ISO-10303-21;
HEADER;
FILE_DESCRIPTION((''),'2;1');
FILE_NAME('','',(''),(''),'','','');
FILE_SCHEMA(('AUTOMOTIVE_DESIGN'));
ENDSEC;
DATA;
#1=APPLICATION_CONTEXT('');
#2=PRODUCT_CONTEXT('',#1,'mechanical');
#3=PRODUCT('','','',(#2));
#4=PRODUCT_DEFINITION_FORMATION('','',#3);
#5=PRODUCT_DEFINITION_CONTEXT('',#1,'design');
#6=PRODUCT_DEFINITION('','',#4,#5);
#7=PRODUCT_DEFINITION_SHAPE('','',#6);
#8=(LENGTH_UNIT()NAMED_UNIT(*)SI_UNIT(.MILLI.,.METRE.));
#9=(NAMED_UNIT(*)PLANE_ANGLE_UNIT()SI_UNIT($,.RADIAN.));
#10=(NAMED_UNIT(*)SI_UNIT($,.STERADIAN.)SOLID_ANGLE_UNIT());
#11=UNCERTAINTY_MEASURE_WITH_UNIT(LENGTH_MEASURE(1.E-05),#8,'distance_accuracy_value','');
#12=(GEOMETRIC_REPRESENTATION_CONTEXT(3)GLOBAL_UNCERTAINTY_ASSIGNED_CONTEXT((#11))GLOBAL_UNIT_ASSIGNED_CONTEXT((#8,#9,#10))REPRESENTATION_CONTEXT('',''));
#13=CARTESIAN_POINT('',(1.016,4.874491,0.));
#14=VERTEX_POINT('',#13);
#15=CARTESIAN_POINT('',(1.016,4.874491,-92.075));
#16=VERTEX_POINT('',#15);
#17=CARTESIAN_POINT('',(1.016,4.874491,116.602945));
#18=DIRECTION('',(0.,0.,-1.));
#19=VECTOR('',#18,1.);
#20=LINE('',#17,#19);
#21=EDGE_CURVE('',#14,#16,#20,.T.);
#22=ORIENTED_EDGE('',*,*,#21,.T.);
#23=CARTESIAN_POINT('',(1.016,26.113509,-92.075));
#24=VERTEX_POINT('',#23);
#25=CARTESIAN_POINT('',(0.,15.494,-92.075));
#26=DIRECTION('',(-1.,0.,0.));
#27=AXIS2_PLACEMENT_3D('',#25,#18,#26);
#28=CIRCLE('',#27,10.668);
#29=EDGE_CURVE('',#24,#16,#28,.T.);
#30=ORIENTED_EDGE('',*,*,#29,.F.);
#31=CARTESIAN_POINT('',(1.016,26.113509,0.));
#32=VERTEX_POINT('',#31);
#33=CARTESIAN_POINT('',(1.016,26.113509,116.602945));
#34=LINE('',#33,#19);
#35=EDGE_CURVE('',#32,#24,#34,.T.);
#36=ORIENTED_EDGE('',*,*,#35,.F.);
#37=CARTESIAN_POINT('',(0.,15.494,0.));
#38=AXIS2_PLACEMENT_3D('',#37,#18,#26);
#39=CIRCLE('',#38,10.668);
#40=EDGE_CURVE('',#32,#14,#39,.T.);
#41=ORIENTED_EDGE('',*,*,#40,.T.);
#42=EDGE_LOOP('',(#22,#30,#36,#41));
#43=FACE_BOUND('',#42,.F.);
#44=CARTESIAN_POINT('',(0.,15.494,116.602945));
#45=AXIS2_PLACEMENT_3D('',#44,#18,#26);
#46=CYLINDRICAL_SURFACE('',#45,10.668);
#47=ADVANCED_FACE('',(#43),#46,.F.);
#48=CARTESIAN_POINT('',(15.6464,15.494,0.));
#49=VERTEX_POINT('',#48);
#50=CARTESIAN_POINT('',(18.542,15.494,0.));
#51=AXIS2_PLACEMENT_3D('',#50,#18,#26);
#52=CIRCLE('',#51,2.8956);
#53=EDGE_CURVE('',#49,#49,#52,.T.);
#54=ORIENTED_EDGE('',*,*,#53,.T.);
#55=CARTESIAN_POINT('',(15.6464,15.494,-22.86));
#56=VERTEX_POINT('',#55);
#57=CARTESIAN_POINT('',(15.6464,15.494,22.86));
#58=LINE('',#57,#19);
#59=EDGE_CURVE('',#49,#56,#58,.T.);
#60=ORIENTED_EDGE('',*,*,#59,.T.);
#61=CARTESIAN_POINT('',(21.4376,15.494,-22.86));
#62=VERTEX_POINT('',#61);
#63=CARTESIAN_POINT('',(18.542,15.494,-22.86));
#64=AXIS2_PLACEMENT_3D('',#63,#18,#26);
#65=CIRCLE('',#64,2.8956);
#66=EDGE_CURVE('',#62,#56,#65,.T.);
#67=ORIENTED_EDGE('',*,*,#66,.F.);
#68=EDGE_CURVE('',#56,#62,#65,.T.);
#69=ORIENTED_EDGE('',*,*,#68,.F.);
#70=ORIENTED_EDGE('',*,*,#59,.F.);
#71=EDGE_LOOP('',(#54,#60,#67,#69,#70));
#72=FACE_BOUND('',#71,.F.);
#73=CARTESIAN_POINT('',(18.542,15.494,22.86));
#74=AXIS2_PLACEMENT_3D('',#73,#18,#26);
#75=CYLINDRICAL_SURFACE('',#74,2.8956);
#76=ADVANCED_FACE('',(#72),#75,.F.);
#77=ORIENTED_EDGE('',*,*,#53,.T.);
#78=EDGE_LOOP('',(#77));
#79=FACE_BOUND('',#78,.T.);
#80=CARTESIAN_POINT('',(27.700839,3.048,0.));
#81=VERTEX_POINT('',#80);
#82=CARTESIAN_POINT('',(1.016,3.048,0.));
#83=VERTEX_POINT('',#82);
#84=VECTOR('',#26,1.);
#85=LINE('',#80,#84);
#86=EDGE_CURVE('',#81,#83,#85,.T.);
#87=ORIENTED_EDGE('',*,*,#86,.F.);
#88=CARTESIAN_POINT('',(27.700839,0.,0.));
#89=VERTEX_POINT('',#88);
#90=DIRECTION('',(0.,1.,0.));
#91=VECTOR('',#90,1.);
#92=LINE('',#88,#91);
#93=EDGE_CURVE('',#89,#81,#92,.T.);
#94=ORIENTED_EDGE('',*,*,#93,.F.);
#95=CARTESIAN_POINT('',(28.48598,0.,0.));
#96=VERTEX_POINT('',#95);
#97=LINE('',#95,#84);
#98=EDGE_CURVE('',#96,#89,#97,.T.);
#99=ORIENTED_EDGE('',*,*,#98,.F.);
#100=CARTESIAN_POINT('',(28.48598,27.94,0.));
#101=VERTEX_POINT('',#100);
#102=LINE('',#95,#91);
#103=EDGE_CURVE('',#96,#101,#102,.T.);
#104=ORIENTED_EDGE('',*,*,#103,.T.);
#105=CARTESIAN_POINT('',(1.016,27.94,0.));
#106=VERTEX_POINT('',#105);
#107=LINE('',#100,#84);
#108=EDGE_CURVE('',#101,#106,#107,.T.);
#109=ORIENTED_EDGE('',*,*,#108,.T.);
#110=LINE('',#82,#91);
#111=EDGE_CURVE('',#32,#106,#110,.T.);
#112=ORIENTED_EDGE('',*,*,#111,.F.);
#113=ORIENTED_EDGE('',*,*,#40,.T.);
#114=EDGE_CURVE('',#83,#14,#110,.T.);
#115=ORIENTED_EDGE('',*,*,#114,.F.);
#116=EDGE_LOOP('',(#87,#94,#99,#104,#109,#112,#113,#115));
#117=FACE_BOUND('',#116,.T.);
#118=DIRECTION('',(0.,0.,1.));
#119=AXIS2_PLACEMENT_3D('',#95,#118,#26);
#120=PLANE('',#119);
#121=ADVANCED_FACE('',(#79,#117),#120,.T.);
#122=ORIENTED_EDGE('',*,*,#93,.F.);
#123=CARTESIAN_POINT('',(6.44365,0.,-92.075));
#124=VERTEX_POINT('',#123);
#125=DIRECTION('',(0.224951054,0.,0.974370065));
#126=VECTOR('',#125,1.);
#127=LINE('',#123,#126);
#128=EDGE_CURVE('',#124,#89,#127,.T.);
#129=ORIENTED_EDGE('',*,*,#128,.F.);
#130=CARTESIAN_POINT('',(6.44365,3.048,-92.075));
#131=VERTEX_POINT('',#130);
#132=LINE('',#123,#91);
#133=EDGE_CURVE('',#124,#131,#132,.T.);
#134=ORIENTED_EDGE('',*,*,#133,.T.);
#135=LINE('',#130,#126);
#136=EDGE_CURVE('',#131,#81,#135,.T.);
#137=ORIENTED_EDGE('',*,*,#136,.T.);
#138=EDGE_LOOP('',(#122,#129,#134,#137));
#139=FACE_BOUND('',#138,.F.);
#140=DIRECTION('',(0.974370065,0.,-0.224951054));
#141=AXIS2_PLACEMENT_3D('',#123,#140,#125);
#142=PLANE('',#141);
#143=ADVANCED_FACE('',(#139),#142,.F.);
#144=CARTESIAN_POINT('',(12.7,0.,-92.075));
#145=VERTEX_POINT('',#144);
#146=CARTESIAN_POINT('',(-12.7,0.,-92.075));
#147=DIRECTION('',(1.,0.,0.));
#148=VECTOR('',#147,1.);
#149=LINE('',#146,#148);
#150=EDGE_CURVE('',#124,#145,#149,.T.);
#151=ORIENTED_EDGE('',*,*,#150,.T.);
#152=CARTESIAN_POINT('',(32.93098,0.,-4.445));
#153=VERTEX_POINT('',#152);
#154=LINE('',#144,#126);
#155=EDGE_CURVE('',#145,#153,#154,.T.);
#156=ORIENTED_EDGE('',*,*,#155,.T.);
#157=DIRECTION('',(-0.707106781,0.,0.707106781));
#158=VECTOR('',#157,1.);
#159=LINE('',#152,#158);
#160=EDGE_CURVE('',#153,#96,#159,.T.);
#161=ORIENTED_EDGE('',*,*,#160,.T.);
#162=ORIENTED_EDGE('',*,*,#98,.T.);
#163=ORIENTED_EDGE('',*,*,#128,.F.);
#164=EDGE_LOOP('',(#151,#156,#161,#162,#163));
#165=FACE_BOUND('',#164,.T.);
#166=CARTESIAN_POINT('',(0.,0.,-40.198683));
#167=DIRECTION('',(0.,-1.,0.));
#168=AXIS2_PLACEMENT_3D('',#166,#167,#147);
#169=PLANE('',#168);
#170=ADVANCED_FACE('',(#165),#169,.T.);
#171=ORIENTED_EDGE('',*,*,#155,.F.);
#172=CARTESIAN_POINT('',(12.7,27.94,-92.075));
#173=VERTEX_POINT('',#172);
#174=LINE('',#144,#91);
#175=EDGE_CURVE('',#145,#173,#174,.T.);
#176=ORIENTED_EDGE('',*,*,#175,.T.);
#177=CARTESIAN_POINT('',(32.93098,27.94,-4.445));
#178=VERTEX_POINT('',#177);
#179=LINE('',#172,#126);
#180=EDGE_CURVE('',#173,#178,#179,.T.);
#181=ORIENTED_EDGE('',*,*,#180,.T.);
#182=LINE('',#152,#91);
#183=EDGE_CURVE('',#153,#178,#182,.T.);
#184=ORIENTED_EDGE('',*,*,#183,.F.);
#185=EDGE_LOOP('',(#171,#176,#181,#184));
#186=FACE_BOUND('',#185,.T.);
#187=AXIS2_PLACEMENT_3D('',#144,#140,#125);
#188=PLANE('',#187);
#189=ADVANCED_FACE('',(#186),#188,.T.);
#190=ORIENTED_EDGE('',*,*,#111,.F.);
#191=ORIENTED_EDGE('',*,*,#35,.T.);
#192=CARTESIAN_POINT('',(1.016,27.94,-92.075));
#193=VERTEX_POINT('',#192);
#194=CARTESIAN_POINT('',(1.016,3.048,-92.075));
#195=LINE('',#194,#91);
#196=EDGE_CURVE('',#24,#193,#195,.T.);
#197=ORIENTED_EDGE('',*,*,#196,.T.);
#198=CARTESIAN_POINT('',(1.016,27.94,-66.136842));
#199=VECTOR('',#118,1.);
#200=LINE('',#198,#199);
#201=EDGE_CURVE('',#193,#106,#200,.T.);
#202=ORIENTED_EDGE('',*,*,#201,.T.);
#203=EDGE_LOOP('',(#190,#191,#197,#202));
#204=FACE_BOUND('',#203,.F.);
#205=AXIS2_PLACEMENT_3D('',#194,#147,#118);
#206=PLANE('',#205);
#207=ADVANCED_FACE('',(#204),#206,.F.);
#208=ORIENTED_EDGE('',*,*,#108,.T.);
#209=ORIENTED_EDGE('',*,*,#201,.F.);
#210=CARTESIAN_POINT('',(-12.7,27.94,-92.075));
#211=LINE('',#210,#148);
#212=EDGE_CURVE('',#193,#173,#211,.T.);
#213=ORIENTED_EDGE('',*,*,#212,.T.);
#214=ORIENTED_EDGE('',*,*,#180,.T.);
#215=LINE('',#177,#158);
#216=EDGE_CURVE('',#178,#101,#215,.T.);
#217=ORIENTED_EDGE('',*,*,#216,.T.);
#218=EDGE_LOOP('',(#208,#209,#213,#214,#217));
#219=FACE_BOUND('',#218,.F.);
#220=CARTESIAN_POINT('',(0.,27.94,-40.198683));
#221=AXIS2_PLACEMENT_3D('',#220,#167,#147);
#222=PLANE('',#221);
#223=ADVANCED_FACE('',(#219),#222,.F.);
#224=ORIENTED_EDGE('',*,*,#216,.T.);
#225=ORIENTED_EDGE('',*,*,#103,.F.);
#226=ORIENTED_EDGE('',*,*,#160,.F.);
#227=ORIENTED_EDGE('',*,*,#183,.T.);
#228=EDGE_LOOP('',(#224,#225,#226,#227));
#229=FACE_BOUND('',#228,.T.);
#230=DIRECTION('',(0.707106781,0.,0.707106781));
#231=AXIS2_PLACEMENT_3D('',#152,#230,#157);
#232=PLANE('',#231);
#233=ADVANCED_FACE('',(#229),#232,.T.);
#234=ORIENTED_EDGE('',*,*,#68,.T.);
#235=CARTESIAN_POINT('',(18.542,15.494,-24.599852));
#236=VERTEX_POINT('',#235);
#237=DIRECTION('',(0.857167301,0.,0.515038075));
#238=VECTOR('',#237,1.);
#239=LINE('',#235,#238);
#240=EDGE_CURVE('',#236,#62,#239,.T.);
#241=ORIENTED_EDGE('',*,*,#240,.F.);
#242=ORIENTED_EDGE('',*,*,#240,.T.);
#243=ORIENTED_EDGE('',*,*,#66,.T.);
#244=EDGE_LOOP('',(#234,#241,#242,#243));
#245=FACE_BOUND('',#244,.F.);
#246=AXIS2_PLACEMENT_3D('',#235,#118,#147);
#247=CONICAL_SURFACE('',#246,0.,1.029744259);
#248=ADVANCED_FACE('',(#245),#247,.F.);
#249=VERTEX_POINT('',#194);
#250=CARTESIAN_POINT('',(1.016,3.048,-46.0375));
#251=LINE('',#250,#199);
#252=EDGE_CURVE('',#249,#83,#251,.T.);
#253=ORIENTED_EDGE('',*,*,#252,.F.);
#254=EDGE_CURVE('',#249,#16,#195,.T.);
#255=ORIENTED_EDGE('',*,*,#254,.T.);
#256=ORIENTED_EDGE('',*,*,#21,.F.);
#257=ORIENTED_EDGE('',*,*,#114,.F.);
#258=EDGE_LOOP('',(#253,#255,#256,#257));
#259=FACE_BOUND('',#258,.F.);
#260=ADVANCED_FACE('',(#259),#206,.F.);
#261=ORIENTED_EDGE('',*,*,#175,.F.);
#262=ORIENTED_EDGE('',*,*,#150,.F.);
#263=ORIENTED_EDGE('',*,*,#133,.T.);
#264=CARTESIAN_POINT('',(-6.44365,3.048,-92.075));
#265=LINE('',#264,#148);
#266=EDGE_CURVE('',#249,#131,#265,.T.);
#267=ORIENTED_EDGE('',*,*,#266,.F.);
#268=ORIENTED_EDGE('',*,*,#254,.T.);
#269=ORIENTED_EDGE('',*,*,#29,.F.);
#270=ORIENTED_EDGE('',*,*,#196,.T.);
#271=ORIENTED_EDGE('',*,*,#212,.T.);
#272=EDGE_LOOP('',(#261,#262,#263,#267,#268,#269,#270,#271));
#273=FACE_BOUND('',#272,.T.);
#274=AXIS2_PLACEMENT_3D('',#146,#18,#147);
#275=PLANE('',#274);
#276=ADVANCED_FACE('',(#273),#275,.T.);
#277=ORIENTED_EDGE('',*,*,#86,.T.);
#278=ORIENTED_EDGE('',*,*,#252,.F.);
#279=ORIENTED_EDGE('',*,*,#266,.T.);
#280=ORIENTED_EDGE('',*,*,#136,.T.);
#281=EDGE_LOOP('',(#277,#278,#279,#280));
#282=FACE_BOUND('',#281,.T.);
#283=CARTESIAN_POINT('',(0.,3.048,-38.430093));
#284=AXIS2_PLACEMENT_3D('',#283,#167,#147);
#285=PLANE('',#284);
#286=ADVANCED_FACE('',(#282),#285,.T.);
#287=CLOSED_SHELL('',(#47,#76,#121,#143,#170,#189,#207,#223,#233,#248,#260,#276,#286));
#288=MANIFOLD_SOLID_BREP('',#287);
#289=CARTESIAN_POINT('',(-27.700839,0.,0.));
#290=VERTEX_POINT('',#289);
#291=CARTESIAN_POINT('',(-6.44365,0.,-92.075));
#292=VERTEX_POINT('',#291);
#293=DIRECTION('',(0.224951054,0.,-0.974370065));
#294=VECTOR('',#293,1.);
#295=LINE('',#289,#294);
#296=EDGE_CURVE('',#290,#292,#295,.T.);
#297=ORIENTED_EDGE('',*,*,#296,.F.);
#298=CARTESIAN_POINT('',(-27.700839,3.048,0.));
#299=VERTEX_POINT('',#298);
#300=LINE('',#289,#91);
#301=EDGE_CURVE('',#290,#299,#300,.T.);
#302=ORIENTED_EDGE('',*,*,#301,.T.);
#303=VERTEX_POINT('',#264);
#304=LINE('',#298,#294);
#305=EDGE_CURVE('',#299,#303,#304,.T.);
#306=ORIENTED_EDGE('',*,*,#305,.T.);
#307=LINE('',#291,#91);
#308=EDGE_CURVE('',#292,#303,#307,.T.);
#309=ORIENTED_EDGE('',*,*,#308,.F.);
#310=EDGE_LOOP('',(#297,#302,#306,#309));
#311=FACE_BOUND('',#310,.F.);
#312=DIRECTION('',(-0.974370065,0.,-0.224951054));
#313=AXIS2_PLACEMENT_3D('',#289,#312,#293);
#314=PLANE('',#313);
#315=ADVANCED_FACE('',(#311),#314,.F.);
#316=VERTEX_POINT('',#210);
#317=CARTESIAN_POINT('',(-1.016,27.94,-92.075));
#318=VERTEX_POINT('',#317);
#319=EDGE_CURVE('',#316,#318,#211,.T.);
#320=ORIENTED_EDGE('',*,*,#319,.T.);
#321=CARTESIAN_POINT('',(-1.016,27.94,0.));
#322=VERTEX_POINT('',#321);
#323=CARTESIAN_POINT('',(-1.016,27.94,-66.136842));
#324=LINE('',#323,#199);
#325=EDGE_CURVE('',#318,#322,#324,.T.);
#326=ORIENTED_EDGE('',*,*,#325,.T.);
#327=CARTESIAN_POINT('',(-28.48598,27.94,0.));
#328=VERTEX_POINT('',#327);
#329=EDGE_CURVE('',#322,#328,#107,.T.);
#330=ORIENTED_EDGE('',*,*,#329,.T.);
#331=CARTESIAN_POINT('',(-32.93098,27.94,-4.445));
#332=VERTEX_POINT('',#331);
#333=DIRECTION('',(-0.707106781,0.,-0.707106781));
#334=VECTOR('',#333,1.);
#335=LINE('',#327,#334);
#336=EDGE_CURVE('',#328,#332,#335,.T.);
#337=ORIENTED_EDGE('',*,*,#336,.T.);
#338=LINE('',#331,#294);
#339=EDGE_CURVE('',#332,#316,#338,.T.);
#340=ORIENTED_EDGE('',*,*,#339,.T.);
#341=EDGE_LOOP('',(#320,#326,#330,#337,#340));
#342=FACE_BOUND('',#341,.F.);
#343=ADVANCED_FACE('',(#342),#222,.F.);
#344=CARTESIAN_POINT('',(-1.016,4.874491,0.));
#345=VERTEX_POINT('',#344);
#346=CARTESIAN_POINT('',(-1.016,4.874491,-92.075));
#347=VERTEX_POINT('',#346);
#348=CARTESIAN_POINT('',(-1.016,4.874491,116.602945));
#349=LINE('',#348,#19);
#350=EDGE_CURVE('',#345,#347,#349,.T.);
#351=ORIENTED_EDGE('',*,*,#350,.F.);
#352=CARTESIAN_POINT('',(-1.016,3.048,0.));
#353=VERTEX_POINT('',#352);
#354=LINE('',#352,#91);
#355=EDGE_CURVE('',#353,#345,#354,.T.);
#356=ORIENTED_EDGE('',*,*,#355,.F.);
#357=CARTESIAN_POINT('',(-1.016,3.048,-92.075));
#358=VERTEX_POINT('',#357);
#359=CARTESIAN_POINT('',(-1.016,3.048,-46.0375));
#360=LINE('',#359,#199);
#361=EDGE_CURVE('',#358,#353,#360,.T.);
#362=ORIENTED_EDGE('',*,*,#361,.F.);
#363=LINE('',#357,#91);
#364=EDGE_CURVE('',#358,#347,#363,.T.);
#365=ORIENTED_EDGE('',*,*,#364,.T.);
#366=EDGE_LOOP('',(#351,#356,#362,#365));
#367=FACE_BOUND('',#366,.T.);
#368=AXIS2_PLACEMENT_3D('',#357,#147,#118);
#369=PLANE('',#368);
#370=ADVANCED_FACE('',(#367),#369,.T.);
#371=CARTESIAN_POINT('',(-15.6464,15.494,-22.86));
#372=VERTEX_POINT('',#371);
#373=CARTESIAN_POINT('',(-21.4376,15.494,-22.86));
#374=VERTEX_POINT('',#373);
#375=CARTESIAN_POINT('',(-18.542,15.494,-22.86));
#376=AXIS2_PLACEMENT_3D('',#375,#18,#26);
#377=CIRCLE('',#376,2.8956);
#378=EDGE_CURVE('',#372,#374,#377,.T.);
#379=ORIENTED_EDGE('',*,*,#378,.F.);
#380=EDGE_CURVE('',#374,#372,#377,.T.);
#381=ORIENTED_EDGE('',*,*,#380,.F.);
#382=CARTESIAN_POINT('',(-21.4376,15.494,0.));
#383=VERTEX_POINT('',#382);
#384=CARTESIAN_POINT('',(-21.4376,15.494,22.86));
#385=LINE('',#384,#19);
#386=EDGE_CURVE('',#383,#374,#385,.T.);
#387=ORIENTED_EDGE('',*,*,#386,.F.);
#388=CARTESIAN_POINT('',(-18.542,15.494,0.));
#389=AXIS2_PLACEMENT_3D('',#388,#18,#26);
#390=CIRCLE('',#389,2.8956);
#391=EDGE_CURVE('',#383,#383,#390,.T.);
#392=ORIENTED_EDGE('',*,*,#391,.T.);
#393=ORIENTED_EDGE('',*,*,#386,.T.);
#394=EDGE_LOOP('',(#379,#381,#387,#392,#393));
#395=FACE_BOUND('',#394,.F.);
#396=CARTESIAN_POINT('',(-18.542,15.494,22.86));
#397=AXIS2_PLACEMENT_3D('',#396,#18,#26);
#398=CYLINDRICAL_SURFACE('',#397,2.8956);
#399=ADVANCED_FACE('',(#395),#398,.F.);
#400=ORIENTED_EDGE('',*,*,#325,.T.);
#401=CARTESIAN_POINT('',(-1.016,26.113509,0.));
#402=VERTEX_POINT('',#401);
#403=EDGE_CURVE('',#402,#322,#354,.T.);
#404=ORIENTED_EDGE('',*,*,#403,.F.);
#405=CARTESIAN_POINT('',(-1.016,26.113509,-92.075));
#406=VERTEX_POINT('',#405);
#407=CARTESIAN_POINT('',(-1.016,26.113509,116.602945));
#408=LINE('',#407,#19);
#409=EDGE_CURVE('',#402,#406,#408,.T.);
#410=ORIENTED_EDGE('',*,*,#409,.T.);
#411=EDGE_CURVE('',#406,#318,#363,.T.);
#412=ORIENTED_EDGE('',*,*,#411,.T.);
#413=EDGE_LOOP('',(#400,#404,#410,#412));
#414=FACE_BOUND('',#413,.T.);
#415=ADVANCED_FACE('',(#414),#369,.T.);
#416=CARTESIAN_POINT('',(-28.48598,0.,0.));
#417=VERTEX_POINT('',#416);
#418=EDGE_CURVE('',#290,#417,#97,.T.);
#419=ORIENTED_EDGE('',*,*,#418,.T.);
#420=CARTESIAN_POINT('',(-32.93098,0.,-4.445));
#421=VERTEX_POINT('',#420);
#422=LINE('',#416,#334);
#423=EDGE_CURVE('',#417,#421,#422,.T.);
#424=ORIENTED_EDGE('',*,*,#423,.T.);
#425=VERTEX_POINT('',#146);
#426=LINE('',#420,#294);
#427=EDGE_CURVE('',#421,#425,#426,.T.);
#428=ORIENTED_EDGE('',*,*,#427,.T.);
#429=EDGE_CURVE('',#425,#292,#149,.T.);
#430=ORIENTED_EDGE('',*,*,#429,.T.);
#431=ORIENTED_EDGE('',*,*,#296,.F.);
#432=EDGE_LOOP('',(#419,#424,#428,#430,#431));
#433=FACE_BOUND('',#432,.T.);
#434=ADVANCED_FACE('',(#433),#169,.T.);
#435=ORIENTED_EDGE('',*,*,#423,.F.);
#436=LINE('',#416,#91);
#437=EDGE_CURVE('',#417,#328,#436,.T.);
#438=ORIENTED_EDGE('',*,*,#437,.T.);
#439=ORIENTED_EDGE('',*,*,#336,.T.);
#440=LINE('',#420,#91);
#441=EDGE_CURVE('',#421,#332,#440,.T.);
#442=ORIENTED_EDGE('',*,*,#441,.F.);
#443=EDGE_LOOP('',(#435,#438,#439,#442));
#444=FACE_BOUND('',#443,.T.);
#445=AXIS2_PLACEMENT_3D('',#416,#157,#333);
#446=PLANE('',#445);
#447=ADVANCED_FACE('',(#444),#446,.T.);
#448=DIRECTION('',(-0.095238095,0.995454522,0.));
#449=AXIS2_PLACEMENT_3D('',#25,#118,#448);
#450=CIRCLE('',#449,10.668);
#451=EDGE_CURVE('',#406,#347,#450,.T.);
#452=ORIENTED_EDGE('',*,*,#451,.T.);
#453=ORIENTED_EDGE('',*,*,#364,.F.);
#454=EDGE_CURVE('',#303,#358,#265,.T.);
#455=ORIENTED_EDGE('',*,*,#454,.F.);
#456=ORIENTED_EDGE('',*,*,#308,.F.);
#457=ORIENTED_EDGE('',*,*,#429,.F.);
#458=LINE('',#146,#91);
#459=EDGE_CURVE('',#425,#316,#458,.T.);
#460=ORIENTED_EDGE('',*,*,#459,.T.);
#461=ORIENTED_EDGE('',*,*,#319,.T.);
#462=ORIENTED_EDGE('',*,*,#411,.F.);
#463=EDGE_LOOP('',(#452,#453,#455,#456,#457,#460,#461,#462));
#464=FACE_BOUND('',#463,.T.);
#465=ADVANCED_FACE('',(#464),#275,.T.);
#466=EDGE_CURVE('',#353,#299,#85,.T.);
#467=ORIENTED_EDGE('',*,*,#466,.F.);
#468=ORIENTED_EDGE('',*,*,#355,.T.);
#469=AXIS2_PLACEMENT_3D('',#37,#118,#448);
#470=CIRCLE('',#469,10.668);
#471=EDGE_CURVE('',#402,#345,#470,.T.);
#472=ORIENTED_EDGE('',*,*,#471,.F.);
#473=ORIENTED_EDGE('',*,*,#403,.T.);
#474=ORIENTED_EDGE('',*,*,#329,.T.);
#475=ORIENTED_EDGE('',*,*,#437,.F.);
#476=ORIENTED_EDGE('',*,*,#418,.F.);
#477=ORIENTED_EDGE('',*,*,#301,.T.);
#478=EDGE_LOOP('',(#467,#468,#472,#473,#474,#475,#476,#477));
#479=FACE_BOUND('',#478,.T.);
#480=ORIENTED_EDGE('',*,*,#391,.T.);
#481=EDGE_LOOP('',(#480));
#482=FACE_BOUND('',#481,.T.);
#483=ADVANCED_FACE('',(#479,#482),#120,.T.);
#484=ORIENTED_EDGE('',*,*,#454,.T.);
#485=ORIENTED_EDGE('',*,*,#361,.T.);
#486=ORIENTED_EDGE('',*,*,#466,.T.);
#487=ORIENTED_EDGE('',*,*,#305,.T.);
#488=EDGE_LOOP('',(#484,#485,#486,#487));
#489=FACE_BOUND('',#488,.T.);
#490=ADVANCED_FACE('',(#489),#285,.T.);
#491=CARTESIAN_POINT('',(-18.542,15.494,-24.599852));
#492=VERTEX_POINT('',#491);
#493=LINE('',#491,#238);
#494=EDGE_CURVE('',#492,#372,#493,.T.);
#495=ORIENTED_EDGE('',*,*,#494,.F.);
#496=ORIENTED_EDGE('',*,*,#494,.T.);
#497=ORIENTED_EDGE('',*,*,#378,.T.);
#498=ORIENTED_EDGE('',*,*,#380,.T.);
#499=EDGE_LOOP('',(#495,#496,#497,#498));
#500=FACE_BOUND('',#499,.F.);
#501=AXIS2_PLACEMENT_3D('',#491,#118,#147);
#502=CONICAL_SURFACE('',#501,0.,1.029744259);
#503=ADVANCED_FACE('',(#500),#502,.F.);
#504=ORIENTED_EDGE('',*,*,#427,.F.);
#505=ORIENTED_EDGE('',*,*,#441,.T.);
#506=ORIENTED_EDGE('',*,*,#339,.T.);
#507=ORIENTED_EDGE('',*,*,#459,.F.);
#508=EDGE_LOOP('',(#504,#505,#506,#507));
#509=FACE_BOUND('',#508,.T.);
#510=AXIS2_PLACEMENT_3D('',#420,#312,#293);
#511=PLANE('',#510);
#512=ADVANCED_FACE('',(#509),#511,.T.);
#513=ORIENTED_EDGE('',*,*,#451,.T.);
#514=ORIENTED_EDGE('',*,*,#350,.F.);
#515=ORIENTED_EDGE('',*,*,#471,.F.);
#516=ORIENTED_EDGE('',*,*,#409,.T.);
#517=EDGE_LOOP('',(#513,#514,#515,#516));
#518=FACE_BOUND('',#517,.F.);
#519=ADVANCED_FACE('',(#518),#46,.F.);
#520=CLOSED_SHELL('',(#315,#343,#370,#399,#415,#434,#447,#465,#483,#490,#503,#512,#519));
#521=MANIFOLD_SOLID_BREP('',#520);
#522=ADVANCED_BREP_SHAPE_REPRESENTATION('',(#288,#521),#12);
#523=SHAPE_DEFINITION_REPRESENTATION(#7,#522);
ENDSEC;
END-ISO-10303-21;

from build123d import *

# Parameters (mm, degrees)
F1_DEPTH = 27.94
F3_DEPTH = 3.048
F5_D     = 5.7912
F5_DEPTH = 22.86
F5_TIP   = 1.7398520085
F7_D     = 21.336
F8_W     = 2.032
F8_H     = 92.075
F9_DEPTH = 24.893


# Not quite as in the source:
# - a feature names something its author has since deleted; it is built from what else it names


with BuildPart() as f1:
    # F0 (on Front) → F1 (new body)
    with BuildSketch(Plane.XZ):
        Polygon((12.7, -92.075), (32.9309795883, -4.445), (28.4859795883, 0), (-28.4859795883, 0), (-32.9309795883, -4.445), (-12.7, -92.075), align=None)
    extrude(amount=-F1_DEPTH)

    # F2 (on face) → F3 (cut)
    with BuildSketch(Plane.XZ):
        Polygon((-27.7008388568, 0), (-6.4436501589, -92.075), (6.4436501589, -92.075), (27.7008388568, 0), align=None)
    extrude(amount=-F3_DEPTH, mode=Mode.SUBTRACT)

    # F5
    with Locations(Plane.XY):
        with Locations((-18.542, 15.494), (18.542, 15.494)):
            Hole(F5_D / 2, depth=F5_DEPTH)
            with Locations((0, 0, -(F5_DEPTH + F5_TIP / 2))):  # 118° drill point
                Cone(0, F5_D / 2, F5_TIP, mode=Mode.SUBTRACT)

    # F7 (through all)
    with Locations(Plane.XY):
        with Locations((0, 15.494)):
            Hole(F7_D / 2)

    # F8 (on face) → F9 (cut, through all)
    with BuildSketch(Plane.XZ.offset(-3.048)):
        with Locations((0, -46.0375)):
            Rectangle(F8_W, F8_H)
    extrude(amount=-F9_DEPTH, mode=Mode.SUBTRACT)


solid = f1.part
